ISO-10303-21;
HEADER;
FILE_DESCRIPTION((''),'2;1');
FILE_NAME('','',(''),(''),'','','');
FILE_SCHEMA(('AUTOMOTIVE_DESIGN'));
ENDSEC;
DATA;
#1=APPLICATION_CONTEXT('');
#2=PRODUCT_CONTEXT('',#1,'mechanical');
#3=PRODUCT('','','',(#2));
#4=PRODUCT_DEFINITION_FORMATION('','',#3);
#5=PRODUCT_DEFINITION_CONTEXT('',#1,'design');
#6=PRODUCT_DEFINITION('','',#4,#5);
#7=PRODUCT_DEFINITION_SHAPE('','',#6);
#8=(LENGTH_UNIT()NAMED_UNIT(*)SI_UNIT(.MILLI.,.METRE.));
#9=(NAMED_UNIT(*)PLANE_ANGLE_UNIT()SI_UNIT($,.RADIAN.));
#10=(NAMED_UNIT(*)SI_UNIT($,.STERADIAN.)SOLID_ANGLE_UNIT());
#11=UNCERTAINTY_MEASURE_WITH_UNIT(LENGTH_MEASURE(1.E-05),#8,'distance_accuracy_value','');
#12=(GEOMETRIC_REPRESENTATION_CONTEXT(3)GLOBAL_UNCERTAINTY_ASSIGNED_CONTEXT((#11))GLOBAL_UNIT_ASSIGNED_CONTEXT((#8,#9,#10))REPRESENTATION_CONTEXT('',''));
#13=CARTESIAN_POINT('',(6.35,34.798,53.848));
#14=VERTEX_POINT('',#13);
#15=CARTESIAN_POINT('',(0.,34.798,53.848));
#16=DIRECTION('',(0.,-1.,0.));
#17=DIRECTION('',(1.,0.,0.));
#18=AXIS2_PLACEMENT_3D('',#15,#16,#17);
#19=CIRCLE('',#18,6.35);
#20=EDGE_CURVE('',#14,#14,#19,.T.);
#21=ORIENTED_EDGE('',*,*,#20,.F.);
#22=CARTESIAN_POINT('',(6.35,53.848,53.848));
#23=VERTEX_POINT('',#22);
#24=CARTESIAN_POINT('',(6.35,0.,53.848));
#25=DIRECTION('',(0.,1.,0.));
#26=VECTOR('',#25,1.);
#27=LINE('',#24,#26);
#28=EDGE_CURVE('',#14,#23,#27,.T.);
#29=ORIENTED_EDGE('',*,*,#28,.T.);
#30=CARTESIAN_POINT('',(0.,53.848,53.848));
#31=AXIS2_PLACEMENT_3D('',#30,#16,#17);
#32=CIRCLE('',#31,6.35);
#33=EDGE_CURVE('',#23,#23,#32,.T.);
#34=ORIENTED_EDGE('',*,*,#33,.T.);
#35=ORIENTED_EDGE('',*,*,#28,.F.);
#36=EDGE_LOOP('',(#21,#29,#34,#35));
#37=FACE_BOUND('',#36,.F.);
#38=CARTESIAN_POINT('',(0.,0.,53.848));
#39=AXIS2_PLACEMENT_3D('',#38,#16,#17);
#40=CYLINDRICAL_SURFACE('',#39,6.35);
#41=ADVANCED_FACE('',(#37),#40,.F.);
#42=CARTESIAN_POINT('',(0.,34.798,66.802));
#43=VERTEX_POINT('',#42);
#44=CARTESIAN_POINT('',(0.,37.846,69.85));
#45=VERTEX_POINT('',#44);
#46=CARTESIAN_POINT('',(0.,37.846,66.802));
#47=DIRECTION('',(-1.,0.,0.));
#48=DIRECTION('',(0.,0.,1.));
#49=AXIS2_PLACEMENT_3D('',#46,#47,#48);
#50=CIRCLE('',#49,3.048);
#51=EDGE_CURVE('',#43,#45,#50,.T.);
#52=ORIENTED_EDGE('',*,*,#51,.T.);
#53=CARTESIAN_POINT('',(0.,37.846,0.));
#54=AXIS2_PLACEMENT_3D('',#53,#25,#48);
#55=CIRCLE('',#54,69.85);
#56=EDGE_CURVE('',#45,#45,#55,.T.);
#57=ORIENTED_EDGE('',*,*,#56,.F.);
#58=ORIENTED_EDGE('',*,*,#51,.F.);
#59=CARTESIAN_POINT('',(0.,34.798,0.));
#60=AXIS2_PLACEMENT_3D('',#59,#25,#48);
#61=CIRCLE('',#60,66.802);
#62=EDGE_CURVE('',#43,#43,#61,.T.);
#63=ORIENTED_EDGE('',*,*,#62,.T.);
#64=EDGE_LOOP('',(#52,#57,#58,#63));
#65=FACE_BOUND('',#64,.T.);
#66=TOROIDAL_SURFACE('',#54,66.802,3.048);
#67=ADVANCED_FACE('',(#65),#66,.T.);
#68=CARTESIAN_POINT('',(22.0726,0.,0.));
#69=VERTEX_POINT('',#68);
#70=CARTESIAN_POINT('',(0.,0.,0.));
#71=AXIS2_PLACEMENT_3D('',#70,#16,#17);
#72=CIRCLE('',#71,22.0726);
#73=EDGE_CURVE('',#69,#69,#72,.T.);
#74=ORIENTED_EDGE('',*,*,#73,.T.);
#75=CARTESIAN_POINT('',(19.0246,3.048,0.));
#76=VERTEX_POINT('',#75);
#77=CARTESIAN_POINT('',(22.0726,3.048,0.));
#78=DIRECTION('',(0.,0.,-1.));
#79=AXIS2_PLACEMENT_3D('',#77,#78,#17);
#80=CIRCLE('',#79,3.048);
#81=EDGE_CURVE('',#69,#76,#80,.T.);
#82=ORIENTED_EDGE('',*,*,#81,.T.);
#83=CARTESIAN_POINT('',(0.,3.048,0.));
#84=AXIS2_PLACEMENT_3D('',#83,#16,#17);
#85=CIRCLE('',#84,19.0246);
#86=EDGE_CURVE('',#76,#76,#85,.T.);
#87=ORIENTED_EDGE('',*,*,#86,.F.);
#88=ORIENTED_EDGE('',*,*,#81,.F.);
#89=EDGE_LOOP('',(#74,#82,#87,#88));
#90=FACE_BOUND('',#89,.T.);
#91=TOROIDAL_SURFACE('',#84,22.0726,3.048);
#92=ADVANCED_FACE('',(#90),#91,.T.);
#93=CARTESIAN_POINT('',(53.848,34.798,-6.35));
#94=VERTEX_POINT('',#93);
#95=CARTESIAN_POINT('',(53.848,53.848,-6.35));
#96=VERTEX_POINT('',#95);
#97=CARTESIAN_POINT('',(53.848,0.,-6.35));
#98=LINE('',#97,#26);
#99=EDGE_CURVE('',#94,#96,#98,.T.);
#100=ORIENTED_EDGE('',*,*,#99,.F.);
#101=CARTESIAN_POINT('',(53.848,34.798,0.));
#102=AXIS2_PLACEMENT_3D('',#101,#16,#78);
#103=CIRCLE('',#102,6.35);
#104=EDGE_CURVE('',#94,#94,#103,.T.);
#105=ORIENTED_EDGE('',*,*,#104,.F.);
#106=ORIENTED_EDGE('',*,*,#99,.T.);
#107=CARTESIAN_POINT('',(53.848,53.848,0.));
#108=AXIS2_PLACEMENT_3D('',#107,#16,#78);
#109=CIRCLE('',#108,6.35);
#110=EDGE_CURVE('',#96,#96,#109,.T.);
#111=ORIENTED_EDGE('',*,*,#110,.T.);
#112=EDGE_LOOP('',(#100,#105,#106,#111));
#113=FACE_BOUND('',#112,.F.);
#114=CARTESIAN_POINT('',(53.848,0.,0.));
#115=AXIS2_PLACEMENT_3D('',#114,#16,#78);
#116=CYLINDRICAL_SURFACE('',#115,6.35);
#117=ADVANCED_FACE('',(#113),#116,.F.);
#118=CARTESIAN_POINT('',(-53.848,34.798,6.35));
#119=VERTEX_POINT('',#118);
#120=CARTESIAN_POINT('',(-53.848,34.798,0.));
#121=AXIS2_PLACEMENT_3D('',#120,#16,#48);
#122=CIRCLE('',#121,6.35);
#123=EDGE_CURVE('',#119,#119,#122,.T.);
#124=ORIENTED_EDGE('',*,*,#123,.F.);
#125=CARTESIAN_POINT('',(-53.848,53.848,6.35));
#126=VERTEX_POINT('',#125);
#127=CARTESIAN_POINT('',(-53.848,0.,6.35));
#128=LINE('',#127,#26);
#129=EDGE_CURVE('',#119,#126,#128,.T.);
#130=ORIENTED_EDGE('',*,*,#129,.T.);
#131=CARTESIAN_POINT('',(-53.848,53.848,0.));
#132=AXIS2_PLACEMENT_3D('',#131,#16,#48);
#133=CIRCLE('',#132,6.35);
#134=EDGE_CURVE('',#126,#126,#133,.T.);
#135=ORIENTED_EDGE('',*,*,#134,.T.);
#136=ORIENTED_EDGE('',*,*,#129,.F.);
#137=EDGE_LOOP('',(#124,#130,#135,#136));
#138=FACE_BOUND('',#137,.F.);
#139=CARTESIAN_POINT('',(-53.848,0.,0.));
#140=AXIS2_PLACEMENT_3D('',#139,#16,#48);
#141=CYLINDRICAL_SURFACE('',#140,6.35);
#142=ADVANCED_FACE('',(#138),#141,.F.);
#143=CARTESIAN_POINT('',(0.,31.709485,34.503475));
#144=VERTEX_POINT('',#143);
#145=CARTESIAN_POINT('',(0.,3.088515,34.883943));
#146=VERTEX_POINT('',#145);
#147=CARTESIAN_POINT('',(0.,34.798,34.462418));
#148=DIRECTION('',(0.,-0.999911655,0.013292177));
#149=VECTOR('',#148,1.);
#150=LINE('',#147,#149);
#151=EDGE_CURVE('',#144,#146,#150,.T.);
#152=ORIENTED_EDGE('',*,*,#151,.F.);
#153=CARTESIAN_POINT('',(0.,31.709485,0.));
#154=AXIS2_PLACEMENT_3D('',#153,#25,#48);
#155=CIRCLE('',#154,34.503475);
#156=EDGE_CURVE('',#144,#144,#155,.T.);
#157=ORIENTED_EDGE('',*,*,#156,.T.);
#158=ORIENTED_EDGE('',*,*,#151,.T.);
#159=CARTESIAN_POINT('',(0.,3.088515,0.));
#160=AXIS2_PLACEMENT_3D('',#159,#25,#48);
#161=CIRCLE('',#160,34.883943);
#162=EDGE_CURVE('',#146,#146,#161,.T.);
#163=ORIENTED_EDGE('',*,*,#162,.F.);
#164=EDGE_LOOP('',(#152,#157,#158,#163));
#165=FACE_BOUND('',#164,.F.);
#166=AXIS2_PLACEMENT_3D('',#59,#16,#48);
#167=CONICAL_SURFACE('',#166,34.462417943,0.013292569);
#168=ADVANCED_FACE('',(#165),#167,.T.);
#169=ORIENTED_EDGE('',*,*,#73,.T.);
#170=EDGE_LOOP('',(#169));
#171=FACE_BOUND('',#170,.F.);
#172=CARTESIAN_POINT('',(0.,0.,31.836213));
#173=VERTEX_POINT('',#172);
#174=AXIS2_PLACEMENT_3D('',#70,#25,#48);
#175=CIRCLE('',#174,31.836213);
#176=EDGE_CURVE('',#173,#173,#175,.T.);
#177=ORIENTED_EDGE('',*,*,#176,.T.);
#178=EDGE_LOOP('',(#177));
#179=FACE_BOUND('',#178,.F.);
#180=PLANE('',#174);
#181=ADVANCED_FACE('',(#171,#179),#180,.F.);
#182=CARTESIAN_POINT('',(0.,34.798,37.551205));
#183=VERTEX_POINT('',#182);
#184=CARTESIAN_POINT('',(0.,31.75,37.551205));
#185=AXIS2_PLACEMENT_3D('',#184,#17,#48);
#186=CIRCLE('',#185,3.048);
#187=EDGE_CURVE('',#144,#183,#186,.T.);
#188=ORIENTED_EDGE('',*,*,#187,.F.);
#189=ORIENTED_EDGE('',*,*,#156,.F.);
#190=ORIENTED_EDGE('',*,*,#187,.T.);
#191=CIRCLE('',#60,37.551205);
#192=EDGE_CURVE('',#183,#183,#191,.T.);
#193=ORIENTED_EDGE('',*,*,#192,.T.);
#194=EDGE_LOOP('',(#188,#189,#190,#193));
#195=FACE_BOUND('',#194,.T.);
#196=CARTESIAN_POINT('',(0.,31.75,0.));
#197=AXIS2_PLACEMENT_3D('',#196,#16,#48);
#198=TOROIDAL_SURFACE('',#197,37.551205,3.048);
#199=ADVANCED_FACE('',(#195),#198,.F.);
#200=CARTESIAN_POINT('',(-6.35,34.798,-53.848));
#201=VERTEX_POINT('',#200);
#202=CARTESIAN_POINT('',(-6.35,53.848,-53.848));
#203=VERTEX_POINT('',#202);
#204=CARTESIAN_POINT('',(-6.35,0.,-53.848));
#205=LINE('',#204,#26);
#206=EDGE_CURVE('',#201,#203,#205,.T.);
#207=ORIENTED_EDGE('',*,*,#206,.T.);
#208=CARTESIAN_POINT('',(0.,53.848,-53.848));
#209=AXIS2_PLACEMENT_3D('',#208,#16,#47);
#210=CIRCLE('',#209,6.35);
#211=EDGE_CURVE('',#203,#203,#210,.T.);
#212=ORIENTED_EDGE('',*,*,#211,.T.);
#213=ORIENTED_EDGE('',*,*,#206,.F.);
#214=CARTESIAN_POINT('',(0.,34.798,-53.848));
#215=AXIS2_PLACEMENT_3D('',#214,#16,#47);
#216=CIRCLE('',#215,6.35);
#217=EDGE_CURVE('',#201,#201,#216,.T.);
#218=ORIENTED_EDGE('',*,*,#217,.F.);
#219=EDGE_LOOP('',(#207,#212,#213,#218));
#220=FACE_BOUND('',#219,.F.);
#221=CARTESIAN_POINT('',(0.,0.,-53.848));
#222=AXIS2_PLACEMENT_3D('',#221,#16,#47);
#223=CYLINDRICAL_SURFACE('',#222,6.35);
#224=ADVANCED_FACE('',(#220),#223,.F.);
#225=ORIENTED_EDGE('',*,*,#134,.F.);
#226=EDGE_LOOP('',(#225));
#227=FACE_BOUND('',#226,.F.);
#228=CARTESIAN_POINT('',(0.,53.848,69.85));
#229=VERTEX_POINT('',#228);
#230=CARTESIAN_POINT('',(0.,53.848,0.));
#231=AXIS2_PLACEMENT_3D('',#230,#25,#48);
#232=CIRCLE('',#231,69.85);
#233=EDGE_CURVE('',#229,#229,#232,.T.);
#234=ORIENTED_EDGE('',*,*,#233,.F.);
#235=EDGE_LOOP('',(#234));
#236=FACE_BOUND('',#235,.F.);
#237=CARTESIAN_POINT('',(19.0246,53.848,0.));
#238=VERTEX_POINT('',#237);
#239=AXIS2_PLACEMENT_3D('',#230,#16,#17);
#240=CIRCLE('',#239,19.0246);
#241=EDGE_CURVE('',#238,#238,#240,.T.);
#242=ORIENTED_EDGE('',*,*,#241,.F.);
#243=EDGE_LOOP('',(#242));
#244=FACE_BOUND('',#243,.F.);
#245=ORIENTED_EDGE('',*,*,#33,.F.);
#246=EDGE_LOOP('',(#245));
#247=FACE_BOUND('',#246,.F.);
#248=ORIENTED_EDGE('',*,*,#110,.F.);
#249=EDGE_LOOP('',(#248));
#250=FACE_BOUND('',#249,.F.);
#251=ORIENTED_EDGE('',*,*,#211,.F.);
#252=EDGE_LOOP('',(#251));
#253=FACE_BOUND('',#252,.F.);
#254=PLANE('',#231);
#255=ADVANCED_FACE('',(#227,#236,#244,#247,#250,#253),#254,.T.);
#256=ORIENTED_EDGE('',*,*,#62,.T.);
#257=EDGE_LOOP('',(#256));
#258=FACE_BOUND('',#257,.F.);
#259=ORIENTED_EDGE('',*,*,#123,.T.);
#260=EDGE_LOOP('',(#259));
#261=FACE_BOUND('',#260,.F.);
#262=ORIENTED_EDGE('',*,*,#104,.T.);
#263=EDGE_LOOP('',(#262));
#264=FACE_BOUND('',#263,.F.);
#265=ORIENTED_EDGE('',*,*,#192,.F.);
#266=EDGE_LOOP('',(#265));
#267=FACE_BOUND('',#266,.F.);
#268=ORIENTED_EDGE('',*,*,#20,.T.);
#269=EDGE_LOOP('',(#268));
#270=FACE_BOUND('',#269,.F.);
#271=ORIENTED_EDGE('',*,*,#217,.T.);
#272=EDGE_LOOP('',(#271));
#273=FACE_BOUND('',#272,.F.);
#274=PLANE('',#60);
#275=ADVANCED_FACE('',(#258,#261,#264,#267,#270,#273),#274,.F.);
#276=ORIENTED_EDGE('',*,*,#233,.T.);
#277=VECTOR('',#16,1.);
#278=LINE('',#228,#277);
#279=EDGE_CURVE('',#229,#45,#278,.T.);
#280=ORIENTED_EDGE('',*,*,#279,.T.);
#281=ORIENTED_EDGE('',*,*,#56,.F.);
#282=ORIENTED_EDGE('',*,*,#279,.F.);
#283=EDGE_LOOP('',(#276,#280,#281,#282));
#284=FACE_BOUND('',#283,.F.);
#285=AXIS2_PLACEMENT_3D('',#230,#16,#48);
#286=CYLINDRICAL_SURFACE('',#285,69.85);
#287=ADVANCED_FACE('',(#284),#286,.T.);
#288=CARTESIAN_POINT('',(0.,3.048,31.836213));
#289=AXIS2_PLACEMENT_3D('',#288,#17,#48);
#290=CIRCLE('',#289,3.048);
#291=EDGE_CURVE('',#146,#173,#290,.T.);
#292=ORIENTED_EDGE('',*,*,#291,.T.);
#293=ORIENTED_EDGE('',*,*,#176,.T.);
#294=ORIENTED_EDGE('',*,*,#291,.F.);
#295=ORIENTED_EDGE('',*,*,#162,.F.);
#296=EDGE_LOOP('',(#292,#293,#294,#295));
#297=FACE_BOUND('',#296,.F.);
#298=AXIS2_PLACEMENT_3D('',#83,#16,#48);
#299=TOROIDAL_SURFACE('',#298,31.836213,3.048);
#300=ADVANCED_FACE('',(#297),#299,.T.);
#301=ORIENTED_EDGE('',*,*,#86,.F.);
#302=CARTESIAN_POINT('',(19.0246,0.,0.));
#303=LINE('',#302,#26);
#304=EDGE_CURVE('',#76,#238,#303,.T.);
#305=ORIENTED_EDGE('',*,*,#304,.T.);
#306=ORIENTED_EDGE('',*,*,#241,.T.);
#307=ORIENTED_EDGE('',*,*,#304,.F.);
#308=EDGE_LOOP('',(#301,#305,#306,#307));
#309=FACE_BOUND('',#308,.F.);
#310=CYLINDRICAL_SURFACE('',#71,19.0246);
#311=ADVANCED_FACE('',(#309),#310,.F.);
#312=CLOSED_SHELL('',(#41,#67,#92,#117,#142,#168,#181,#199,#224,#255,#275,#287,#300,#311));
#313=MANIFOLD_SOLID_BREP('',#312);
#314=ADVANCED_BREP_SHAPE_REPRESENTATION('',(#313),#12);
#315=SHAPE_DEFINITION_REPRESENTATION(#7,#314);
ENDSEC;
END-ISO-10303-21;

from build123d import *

# Parameters (mm, degrees)
F2_R            = 19.0246
F3_DEPTH        = 53.849
F4_R            = 6.35
F5_DEPTH        = 53.849
F5_COPIES_COUNT = 4
F6_R            = 3.048


# Not quite as in the source:
# - a pattern or mirror of a feature is missing from the dataset's text; its kind, count and spacing are read off the source's solid


with BuildPart() as f1:
    # F0 (on Right) → F1 (revolve)
    with BuildSketch(Plane.YZ):
        Polygon((34.798, 34.4624179433), (0, 34.925), (0, 0), (53.848, 0), (53.848, 69.85), (34.798, 69.85), align=None)
    revolve(axis=Axis((0, 26.924, 0), (0, 1, 0)))

    # F2 (on Front) → F3 (cut, through all)
    with BuildSketch(Plane.XZ):
        Circle(F2_R)
    extrude(amount=-F3_DEPTH, mode=Mode.SUBTRACT)

    # F4 (on Front) → F5 (cut, through all)
    with BuildSketch(Plane.XZ):
        with Locations((0, 53.848)):
            Circle(F4_R)
    f5 = extrude(amount=-F5_DEPTH, mode=Mode.SUBTRACT)

    # F5_copies: F5 ×4 about axis
    f5_copies_axis = Axis((0, 0, 0), (0, 1, 0))
    for i in range(1, F5_COPIES_COUNT):
        add(f5.rotate(f5_copies_axis, i * 360 / F5_COPIES_COUNT), mode=Mode.SUBTRACT)

    # F6
    f6_edges = [f1.edges().sort_by_distance(p)[0] for p in [
        (0, 0, -34.925),
        (-19.0246, 0, 0),
        (0, 34.798, -69.85),
        (0, 34.798, -34.462418),
    ]]
    fillet(f6_edges, radius=F6_R)


solid = f1.part
